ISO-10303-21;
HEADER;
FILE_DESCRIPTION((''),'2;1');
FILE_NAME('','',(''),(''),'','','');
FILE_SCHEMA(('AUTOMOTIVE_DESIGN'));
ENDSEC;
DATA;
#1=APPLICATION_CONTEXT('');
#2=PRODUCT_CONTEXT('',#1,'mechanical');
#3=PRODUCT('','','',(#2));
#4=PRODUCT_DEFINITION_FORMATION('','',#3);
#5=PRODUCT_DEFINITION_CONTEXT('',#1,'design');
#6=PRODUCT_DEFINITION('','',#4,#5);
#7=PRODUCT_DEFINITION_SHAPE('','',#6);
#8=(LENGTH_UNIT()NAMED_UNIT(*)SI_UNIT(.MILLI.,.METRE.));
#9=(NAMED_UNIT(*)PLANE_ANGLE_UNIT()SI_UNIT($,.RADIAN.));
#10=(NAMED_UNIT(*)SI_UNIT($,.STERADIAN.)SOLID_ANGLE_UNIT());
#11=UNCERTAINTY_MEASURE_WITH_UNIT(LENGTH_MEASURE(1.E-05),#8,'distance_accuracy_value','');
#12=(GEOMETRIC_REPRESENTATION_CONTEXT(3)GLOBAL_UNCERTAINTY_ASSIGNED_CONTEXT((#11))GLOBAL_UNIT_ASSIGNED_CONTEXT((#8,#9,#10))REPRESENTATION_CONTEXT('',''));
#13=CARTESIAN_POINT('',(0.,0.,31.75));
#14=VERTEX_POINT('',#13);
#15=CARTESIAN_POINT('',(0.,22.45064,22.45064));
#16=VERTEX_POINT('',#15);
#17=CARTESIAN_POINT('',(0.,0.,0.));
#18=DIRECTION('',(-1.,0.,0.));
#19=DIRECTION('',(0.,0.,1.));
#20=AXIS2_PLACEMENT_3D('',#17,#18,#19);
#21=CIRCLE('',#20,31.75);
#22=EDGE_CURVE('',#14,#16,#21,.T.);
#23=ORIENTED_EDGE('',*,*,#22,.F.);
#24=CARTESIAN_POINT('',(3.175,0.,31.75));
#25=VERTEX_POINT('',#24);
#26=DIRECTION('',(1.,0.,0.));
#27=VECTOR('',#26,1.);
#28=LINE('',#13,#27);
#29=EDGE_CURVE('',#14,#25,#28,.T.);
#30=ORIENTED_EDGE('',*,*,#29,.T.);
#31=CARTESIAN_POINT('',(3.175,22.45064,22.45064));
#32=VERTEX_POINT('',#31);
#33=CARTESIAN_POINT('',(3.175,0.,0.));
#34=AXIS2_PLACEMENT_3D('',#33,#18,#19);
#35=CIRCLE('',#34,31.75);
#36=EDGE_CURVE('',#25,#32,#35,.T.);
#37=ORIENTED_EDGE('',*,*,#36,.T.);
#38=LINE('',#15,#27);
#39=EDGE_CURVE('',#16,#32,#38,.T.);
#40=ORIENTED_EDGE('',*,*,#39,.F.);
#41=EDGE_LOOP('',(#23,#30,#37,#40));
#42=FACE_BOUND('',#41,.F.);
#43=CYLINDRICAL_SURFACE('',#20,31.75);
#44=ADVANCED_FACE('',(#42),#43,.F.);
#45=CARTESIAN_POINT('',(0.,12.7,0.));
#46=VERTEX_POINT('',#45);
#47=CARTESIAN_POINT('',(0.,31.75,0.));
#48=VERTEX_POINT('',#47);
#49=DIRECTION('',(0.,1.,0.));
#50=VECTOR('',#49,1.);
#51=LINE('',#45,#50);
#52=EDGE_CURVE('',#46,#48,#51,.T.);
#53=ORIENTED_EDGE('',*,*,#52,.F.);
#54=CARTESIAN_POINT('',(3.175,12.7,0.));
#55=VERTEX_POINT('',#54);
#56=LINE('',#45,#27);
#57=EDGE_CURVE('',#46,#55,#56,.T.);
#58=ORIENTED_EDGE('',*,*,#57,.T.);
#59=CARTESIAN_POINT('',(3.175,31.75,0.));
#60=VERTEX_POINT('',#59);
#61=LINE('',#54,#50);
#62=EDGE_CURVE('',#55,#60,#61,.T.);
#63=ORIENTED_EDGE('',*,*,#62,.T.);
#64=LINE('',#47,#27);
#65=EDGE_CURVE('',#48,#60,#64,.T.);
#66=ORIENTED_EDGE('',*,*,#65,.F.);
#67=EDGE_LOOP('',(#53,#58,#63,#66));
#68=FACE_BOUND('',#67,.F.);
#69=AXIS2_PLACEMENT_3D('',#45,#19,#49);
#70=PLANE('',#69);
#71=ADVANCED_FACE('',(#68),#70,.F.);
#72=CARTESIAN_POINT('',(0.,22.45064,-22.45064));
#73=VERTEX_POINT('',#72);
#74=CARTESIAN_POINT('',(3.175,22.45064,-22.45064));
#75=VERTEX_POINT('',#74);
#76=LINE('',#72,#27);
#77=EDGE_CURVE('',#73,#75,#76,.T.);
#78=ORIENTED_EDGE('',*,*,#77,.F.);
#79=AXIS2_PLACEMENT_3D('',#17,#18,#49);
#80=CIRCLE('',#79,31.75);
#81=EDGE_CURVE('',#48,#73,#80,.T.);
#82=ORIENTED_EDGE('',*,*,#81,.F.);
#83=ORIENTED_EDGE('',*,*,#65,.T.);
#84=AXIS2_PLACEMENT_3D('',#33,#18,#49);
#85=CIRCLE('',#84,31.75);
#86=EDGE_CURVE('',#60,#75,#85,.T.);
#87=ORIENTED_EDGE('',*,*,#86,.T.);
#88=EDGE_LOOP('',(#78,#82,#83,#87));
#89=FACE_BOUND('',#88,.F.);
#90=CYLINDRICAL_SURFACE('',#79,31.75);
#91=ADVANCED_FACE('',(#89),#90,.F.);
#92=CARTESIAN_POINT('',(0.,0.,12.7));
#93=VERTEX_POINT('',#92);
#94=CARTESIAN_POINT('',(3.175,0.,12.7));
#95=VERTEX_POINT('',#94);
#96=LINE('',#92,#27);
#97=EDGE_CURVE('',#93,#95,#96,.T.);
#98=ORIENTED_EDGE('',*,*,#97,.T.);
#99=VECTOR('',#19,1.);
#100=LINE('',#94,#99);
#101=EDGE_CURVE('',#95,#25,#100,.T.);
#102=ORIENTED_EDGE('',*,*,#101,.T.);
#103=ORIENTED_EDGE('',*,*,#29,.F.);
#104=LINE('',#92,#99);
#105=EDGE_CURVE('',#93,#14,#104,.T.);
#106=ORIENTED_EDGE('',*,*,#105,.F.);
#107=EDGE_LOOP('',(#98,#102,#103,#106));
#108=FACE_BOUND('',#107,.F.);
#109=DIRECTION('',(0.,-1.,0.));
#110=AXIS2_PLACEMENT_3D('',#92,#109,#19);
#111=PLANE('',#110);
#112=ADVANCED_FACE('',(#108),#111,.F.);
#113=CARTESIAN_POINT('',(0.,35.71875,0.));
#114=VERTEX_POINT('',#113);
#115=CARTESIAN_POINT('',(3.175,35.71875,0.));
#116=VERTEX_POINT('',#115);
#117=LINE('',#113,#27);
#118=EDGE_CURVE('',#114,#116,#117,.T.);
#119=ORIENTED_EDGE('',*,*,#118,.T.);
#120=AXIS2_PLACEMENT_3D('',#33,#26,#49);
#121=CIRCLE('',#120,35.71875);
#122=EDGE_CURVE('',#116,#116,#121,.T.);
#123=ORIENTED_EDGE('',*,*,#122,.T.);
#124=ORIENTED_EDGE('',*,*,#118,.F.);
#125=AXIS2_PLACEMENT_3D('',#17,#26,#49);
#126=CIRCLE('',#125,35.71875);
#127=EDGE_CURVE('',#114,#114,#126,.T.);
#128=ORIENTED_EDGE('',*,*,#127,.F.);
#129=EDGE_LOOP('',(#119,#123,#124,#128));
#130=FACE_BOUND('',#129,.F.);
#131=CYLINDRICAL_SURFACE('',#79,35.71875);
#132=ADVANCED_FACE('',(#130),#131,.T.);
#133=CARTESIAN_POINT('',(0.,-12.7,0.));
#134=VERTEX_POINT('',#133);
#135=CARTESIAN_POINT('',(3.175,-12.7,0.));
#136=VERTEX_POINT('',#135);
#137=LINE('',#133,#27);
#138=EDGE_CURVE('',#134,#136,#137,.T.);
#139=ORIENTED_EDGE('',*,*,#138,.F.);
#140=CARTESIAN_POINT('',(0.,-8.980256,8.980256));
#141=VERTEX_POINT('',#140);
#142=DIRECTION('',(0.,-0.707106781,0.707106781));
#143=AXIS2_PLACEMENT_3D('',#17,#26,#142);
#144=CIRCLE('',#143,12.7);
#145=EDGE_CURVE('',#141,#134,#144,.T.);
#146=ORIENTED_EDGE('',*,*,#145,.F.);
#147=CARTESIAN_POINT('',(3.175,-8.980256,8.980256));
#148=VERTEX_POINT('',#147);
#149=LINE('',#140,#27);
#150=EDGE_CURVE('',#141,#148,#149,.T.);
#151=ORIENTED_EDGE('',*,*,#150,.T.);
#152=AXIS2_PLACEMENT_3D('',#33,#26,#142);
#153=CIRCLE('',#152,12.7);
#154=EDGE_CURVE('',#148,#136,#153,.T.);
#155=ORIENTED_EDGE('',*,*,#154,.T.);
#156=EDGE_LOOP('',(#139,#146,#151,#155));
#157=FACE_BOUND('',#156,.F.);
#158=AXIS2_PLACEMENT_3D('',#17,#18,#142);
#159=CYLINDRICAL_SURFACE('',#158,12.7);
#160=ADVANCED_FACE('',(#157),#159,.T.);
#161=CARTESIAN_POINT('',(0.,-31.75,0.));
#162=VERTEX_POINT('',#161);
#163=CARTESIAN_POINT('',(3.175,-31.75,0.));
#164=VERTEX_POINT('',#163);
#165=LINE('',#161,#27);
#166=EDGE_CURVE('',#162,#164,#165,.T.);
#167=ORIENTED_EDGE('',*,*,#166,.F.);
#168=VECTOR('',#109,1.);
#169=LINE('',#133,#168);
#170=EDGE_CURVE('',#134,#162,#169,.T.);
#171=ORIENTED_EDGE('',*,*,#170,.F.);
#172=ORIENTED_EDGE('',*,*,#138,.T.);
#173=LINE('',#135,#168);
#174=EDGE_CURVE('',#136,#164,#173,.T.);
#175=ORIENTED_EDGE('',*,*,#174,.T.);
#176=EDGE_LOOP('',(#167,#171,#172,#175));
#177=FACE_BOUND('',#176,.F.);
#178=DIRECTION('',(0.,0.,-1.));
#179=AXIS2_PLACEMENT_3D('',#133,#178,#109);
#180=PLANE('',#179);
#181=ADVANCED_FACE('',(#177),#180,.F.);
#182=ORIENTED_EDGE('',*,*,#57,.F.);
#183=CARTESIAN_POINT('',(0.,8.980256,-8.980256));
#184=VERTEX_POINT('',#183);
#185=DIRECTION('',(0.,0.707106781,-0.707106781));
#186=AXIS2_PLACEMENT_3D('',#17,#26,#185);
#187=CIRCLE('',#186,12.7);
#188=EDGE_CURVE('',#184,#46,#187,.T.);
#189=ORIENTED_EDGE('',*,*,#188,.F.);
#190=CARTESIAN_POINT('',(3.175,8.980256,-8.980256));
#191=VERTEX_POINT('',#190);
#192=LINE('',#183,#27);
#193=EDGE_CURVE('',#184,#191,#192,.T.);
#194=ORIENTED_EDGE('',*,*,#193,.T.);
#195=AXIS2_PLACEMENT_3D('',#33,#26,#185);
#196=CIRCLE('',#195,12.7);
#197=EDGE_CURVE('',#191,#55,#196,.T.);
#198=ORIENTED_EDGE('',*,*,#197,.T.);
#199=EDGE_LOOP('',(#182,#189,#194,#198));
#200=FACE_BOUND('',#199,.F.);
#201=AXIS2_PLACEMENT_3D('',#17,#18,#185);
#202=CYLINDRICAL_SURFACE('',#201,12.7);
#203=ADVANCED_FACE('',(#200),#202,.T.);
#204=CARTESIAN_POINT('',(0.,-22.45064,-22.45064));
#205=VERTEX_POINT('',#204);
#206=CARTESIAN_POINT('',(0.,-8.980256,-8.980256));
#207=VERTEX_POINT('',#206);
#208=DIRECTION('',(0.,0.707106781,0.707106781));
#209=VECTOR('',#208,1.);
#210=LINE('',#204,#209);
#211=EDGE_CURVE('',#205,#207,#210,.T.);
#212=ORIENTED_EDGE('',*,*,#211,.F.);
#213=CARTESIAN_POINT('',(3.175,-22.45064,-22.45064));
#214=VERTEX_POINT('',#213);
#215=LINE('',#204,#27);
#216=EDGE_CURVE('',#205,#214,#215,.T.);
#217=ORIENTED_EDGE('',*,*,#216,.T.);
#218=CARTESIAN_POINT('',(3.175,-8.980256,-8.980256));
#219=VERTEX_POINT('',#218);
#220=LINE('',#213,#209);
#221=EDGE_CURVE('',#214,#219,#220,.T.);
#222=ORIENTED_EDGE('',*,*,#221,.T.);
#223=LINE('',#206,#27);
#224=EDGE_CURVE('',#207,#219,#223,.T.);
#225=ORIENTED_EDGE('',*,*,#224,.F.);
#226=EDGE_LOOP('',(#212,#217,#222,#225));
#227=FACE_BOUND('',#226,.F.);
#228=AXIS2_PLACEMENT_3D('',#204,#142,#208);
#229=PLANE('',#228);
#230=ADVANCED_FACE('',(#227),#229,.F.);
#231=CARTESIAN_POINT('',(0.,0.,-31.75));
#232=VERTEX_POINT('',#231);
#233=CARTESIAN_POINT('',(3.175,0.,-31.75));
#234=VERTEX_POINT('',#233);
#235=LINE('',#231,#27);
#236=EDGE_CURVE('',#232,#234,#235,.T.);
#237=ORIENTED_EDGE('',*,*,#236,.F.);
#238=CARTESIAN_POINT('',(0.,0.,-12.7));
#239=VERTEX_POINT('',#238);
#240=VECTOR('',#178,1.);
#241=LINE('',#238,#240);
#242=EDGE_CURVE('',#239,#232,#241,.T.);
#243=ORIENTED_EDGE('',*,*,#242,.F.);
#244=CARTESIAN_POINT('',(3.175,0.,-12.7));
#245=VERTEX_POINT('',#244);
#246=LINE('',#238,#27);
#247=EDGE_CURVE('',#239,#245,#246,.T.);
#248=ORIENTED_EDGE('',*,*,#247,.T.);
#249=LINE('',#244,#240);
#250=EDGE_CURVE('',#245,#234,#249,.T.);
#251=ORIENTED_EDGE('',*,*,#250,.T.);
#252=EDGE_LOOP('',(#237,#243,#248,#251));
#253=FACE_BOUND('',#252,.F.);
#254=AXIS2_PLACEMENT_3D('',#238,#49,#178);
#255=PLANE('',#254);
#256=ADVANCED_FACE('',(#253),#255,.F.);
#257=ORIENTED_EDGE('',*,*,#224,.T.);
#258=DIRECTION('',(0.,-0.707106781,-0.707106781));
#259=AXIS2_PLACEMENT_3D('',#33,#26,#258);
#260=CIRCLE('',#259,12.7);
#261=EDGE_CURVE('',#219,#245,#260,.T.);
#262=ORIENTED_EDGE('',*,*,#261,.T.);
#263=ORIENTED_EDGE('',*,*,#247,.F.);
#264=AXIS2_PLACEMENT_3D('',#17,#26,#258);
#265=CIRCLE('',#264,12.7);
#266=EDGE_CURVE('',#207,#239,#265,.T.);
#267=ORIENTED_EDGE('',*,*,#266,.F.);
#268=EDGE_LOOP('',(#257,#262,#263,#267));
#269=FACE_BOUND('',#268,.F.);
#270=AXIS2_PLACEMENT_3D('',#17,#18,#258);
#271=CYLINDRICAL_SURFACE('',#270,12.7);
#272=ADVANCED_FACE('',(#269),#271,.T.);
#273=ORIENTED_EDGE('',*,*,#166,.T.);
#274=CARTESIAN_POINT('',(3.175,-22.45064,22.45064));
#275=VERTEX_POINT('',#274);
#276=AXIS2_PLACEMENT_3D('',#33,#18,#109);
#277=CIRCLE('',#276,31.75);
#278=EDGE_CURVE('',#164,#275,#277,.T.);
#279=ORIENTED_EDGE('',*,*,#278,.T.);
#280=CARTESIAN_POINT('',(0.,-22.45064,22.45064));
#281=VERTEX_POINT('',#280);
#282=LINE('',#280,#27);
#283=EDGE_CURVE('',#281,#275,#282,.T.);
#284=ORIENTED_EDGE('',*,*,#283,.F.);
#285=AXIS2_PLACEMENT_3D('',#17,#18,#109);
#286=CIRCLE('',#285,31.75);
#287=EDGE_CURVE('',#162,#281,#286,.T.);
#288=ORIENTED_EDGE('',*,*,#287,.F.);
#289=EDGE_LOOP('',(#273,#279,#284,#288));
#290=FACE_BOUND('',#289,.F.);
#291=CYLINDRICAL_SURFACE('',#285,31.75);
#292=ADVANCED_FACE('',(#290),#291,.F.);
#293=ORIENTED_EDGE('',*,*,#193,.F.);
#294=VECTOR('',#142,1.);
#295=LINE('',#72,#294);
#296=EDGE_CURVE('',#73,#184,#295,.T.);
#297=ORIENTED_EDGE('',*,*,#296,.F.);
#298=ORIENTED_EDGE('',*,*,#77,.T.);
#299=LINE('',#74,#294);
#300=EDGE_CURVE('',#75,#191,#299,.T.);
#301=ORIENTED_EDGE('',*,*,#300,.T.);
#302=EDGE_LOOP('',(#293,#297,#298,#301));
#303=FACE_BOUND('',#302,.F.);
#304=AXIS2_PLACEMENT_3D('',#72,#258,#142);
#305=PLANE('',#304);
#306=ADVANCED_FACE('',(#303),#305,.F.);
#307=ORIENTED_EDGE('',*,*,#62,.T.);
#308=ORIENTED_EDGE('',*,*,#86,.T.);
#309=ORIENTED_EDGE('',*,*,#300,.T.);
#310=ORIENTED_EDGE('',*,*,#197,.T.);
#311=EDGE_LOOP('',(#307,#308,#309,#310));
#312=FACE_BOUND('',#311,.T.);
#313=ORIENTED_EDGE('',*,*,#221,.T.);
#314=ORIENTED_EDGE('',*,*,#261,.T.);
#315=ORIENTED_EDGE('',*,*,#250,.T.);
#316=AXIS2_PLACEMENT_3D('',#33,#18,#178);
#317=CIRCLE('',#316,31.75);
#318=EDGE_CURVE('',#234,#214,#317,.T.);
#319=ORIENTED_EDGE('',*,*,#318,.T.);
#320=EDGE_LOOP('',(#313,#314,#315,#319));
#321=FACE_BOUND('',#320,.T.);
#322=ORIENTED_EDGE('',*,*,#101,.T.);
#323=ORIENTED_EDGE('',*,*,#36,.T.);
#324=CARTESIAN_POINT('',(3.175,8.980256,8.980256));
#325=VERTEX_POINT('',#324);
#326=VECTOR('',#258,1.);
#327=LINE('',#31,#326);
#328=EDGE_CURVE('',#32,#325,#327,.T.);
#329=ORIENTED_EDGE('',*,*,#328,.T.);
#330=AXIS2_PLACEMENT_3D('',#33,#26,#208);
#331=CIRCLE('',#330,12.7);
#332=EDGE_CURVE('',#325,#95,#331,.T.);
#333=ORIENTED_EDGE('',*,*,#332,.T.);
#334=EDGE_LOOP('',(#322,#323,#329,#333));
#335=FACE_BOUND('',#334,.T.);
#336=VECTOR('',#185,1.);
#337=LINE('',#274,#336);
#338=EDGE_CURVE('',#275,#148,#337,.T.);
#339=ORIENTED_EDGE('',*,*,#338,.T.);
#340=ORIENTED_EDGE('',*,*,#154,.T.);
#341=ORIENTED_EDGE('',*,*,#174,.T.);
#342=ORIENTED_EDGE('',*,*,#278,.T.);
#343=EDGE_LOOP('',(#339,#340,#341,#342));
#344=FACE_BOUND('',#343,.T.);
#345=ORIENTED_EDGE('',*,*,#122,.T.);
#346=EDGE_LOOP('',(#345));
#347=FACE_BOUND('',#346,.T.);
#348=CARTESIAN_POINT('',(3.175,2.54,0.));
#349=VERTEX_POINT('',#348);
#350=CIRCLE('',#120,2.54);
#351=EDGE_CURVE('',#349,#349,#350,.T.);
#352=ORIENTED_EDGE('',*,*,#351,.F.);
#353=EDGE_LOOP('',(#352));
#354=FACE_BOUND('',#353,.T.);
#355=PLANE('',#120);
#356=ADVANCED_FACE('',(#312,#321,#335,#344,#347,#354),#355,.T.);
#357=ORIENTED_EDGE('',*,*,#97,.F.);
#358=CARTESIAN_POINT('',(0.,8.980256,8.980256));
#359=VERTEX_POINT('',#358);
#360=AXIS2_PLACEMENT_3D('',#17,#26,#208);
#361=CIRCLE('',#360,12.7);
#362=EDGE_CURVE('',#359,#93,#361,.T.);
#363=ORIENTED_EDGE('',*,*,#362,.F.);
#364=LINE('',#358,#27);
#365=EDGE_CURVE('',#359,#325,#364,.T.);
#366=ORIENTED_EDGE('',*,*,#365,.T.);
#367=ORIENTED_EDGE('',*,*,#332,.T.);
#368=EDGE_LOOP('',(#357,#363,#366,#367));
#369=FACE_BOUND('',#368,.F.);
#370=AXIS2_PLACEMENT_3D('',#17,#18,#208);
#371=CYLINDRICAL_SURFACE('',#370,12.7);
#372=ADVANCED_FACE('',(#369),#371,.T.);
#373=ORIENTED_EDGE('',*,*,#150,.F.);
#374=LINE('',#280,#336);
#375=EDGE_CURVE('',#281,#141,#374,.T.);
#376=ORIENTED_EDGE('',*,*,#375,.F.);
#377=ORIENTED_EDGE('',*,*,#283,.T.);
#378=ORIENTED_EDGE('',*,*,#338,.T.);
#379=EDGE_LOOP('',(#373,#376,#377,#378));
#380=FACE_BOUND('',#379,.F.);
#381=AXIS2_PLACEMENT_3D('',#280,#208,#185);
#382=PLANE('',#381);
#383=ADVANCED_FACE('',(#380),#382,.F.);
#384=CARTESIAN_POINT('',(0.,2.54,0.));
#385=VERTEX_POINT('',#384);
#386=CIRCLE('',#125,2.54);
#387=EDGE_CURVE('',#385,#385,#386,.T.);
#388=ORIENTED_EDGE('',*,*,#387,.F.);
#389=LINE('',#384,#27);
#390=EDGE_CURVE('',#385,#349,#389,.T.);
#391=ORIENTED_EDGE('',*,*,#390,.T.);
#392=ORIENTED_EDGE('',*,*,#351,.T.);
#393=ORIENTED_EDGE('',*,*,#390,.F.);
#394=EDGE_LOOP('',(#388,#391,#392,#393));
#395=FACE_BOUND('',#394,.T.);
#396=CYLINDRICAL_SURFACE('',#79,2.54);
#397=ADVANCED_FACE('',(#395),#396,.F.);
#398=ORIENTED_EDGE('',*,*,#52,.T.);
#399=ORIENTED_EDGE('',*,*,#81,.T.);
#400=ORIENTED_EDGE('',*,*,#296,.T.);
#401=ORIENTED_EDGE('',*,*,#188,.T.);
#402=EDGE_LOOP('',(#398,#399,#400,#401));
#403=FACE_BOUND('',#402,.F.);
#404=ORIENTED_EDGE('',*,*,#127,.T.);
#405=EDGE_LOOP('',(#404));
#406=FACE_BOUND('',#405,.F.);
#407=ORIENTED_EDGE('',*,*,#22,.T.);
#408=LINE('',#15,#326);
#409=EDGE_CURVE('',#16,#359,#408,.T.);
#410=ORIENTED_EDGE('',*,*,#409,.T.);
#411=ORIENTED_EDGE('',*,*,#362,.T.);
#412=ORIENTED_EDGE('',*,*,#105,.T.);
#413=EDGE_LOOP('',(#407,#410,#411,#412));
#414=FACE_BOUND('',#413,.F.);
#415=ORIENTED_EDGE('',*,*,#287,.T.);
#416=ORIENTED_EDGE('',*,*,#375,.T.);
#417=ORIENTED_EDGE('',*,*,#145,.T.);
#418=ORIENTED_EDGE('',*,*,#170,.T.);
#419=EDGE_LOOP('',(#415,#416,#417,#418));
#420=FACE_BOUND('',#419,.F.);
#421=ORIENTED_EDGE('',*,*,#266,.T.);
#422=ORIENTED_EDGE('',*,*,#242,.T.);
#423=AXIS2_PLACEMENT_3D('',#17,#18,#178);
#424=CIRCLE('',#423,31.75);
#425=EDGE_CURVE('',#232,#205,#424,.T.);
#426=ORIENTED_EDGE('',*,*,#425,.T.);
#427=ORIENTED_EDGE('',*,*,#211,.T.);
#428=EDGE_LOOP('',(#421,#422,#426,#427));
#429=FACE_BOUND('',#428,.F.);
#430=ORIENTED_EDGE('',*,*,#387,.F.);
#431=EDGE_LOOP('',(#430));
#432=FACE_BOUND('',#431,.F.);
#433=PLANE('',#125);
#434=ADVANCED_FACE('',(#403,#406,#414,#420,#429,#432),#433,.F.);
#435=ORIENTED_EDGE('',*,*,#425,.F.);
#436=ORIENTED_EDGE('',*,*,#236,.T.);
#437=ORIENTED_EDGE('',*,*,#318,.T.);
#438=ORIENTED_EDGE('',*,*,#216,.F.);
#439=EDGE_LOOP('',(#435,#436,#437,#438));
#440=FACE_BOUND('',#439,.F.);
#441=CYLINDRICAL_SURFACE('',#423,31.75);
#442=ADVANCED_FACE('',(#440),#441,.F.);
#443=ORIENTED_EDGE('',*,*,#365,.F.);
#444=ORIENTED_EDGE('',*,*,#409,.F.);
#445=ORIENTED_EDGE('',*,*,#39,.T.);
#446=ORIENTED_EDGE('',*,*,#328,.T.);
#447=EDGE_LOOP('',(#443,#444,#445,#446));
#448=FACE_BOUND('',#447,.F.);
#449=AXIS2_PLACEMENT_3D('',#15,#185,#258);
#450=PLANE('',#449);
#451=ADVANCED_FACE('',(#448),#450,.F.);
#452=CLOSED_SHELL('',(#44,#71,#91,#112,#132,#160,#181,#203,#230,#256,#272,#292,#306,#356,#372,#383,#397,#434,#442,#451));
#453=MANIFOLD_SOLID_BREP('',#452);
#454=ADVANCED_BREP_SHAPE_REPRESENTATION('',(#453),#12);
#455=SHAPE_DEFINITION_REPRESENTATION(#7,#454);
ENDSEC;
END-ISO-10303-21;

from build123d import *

# Parameters (mm, degrees)
F0_R     = 35.71875
F0_R_2   = 2.54
F1_DEPTH = 3.175


# Not quite as in the source:
# - a length typed as a fraction of an inch, garbled in the dataset ("3 / 203.2 mm" for 3/8 in), is restored


with BuildPart() as f1:
    # F0 (on Right) → F1 (new body)
    with BuildSketch(Plane.YZ):
        Circle(F0_R)
        with BuildLine():
            ThreePointArc((0, -31.75), (-12.1501989776, -29.3331751572), (-22.4506403027, -22.4506403027))
            Line((-22.4506403027, -22.4506403027), (-8.9802561211, -8.9802561211))
            ThreePointArc((-8.9802561211, -8.9802561211), (-4.860079591, -11.7332700629), (0, -12.7))
            Line((0, -12.7), (0, -31.75))
        make_face(mode=Mode.SUBTRACT)
        with BuildLine():
            ThreePointArc((8.9802561211, -8.9802561211), (11.7332700629, -4.860079591), (12.7, 0))
            Line((12.7, 0), (31.75, 0))
            ThreePointArc((31.75, 0), (29.3331751572, -12.1501989776), (22.4506403027, -22.4506403027))
            Line((22.4506403027, -22.4506403027), (8.9802561211, -8.9802561211))
        make_face(mode=Mode.SUBTRACT)
        with BuildLine():
            ThreePointArc((-8.9802561211, 8.9802561211), (-11.7332700629, 4.860079591), (-12.7, 0))
            Line((-12.7, 0), (-31.75, 0))
            ThreePointArc((-31.75, 0), (-29.3331751572, 12.1501989776), (-22.4506403027, 22.4506403027))
            Line((-22.4506403027, 22.4506403027), (-8.9802561211, 8.9802561211))
        make_face(mode=Mode.SUBTRACT)
        Circle(F0_R_2, mode=Mode.SUBTRACT)
        with BuildLine():
            ThreePointArc((8.9802561211, 8.9802561211), (4.860079591, 11.7332700629), (0, 12.7))
            Line((0, 12.7), (0, 31.75))
            ThreePointArc((0, 31.75), (12.1501989776, 29.3331751572), (22.4506403027, 22.4506403027))
            Line((22.4506403027, 22.4506403027), (8.9802561211, 8.9802561211))
        make_face(mode=Mode.SUBTRACT)
    extrude(amount=F1_DEPTH)


solid = f1.part
